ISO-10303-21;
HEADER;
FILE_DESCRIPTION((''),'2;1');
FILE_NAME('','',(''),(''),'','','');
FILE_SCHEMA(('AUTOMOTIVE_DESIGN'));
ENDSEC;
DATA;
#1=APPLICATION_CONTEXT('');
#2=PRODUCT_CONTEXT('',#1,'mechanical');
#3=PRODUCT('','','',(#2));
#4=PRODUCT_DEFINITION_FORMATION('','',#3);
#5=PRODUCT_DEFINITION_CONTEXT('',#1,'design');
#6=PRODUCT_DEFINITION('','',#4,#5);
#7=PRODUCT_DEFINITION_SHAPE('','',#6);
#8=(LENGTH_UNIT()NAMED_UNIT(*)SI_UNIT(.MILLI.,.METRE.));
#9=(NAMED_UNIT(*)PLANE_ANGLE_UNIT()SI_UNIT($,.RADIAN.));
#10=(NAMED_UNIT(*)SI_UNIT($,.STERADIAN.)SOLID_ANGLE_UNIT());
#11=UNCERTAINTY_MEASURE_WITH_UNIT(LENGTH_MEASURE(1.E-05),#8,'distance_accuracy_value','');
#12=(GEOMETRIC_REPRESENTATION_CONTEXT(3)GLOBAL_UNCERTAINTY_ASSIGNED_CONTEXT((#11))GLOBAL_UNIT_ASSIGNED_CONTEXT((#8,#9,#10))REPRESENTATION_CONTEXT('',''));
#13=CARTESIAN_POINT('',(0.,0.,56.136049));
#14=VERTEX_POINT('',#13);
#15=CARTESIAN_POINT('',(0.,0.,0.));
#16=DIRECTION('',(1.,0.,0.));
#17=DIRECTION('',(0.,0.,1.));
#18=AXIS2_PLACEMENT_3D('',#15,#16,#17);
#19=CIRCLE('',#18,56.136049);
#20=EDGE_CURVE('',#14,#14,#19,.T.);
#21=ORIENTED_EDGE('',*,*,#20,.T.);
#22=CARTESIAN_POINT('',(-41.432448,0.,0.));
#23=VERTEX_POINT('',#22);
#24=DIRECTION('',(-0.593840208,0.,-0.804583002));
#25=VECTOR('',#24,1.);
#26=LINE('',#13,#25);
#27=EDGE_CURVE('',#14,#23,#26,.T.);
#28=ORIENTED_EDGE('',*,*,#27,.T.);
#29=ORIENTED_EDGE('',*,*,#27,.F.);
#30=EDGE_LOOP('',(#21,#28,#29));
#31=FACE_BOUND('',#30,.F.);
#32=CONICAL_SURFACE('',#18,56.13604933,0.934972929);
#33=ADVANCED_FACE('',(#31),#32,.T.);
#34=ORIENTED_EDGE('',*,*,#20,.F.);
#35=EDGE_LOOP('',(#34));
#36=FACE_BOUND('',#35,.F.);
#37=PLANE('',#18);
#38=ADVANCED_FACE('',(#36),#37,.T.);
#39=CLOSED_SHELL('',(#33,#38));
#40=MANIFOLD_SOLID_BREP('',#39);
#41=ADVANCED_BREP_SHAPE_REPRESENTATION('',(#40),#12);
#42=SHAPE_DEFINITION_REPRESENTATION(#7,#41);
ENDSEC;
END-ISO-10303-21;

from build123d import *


# Not quite as in the source:
# - the program builds the solid bodies; features that only make, move or delete a surface that nothing else refers to are left out


with BuildPart() as f1:
    # F0 (on Front) → F1 (revolve)
    with BuildSketch(Plane.XZ):
        Polygon((0, 0), (0, 56.1360493302), (-41.4324477315, 0), align=None)
    revolve(axis=Axis((-20.7162238657, 0, 0), (1, 0, 0)))


solid = f1.part
